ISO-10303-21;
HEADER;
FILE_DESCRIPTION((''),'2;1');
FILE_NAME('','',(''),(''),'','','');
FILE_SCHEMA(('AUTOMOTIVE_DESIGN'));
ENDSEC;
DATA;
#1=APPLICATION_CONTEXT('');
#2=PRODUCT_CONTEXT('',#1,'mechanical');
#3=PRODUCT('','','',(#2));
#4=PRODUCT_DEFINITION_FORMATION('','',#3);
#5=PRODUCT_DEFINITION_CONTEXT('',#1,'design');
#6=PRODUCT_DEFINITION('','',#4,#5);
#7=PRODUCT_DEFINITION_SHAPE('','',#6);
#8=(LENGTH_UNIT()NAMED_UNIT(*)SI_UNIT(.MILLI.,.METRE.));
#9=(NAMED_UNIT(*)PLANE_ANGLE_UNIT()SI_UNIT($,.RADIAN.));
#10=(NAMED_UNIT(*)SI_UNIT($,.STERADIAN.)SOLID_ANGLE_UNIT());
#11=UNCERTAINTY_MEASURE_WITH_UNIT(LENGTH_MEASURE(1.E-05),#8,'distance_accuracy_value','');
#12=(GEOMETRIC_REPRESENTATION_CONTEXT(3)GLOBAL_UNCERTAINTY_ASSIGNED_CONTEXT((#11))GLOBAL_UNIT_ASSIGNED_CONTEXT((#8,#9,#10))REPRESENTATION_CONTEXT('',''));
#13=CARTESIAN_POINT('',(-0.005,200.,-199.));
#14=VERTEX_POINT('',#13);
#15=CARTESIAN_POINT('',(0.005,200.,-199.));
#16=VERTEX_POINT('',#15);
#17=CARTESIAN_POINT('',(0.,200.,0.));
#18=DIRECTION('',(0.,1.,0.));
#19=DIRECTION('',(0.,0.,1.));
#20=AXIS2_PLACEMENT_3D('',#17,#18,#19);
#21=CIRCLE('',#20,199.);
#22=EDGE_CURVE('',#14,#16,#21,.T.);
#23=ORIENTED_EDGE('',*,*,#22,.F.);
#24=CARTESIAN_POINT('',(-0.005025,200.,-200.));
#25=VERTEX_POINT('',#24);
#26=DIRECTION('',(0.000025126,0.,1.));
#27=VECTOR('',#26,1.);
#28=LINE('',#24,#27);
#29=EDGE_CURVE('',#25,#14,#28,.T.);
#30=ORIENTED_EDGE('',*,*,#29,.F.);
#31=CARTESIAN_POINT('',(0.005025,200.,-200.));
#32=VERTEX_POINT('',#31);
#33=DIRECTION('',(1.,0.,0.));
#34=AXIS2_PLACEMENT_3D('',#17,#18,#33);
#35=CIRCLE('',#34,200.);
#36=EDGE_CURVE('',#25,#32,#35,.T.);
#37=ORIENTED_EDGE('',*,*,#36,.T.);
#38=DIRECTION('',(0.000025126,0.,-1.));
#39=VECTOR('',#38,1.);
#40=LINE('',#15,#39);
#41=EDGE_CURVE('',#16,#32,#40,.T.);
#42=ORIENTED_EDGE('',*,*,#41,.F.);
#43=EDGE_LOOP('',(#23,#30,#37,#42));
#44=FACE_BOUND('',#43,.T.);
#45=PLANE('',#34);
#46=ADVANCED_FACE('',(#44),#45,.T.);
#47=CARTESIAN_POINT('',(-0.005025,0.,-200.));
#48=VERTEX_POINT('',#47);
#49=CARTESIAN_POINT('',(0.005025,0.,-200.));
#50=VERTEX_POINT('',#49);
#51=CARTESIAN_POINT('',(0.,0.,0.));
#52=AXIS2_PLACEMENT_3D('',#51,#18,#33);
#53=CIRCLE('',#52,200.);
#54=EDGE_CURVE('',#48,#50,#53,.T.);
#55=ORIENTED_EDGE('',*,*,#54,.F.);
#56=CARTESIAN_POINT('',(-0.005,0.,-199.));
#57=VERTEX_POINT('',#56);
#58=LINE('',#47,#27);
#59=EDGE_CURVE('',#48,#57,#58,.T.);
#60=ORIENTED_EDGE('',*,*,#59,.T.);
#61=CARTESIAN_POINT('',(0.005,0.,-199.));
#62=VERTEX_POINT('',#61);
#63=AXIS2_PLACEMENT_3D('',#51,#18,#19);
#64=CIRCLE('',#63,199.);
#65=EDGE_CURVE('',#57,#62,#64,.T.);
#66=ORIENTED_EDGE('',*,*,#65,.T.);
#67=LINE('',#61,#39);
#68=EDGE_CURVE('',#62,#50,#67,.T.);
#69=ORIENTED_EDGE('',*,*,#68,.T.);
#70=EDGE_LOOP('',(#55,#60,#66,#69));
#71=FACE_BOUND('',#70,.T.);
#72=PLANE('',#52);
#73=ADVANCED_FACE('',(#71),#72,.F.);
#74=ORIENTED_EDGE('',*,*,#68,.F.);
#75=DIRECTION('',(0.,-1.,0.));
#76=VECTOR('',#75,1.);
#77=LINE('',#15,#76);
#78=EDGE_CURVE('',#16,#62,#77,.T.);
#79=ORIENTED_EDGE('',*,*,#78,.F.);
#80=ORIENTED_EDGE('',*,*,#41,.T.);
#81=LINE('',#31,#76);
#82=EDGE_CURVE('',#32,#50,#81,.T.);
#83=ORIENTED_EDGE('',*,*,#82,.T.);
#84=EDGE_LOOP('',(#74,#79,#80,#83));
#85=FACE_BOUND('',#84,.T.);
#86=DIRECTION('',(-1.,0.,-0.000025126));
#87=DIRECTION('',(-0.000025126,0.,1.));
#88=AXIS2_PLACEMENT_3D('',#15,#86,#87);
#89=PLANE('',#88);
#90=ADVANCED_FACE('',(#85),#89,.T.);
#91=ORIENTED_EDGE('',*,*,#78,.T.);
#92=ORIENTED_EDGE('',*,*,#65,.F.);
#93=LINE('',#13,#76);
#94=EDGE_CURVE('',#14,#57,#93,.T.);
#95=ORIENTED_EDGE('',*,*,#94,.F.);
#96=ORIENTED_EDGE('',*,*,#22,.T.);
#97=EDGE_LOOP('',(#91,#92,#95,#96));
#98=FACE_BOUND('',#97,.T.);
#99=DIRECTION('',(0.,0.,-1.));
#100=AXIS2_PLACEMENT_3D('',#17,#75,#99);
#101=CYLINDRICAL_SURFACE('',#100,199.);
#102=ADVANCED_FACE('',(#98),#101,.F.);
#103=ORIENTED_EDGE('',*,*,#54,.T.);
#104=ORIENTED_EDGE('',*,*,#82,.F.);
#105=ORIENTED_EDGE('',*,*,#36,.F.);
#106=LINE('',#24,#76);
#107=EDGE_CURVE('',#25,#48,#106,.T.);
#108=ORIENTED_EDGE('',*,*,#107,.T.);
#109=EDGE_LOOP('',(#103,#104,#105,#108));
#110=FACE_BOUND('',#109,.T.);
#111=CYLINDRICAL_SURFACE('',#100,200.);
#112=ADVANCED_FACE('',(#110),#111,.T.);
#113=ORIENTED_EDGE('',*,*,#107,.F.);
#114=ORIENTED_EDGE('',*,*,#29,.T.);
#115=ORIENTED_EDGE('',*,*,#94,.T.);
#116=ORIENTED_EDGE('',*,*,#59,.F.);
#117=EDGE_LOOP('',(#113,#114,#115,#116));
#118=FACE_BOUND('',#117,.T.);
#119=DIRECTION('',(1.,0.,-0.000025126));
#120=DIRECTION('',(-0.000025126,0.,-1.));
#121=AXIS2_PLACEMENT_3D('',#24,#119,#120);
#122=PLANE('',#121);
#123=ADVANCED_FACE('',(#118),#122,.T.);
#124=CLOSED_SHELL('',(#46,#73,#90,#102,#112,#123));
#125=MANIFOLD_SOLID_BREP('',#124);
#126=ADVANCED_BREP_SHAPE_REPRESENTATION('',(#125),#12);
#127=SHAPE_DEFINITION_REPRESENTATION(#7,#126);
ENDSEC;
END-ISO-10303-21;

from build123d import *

# Parameters (mm, degrees)
BASE_FLANGE1_DEPTH                    = 200
BASE_FLANGE2_START                    = -1.5
BASE_FLANGE2_DEPTH                    = 1.5
SKETCH9_W                             = 6.25
SKETCH9_H                             = 1.5
F_12_5_12_5_DIAMETER_HOLE2_AT_2_COUNT = 2
F_12_5_12_5_DIAMETER_HOLE2_AT_2_PITCH = 250
F_12_5_12_5_DIAMETER_HOLE2_AT_3_COUNT = 2
F_12_5_12_5_DIAMETER_HOLE2_AT_3_PITCH = 125
F_12_5_12_5_DIAMETER_HOLE2_AT_4_COUNT = 2
F_12_5_12_5_DIAMETER_HOLE2_AT_4_PITCH = 465.111814513
F_12_5_12_5_DIAMETER_HOLE2_AT_5_COUNT = 2
F_12_5_12_5_DIAMETER_HOLE2_AT_5_PITCH = 513.034111926
F_12_5_12_5_DIAMETER_HOLE2_AT_6_COUNT = 2
F_12_5_12_5_DIAMETER_HOLE2_AT_6_PITCH = 448
SKETCH11_W                            = 6.25
SKETCH11_H                            = 1.5
F_12_5_12_5_DIAMETER_HOLE3_AT_2_COUNT = 2
F_12_5_12_5_DIAMETER_HOLE3_AT_2_PITCH = 332
CRVPATTERN1_COUNT                     = 4
CRVPATTERN1_PITCH                     = 125
CRVPATTERN1_COPY_1_SKETCH_W           = 6.25
CRVPATTERN1_COPY_1_SKETCH_H           = 1.5
CRVPATTERN1_COPY_2_SKETCH_W           = 6.25
CRVPATTERN1_COPY_2_SKETCH_H           = 1.5
CRVPATTERN1_COPY_3_SKETCH_W           = 6.25
CRVPATTERN1_COPY_3_SKETCH_H           = 1.5
BASE_FLANGE3_DEPTH                    = 1.5
SKETCH14_W                            = 80
SKETCH14_H                            = 6
SKETCH14_W_2                          = 50
EXTRUDE1_DEPTH                        = 10
CRVPATTERN2_START                     = -81.5
CRVPATTERN2_OUTLINE_W                 = 1.5
CRVPATTERN2_OUTLINE_H                 = 6
CRVPATTERN2_DEPTH                     = 80
CRVPATTERN2_START_2                   = -134.5
CRVPATTERN2_2_OUTLINE_W               = 1.5
CRVPATTERN2_2_OUTLINE_H               = 6
CRVPATTERN2_2_DEPTH                   = 50
SKETCH15_W                            = 6
SKETCH15_H                            = 80
SKETCH15_H_2                          = 50
SKETCH15_H_3                          = 30
SKETCH15_W_2                          = 10
SKETCH15_H_4                          = 10
EXTRUDE2_DEPTH                        = 10


# Read off the part's stored shape, not the designer's step: CrvPattern2
# Sheet-metal steps are written as plain solids
with BuildPart() as part:
    # Sketch1 → Base-Flange1 (new body)
    with BuildSketch(Plane(origin=(0, 0, 0), x_dir=(1, 0, 0), z_dir=(0, 1, 0))):
        with BuildLine():
            ThreePointArc((-0.005, 198.999999937), (0, -199), (0.005, 198.999999937))
            Line((0.005, 198.999999937), (0.005025126, 199.999999937))
            ThreePointArc((0.005025126, 199.999999937), (0, -200), (-0.005025126, 199.999999937))
            Line((-0.005025126, 199.999999937), (-0.005, 198.999999937))
        make_face()
    extrude(amount=BASE_FLANGE1_DEPTH)


with BuildPart() as body_2:
    # Sketch4 → Base-Flange2 (new body)
    with BuildSketch(Plane(origin=(0, 0, 0), x_dir=(1, 0, 0), z_dir=(0, 1, 0)).offset(BASE_FLANGE2_START)):
        Polygon((240, 180), (240, -180), (0, -220), (-240, -180), (-240, 180), (0, 220), align=None)
        with BuildLine():
            Line((143.038535018, 140), (-142.828568571, 140))
            ThreePointArc((-142.828568571, 140), (-200, 0), (-142.828568571, -140))
            Line((-142.828568571, -140), (143.038535018, -140))
            ThreePointArc((143.038535018, -140), (200.15, 0), (143.038535018, 140))
        make_face(mode=Mode.SUBTRACT)
    extrude(amount=BASE_FLANGE2_DEPTH)

    # Sketch9 → Ø12.5 (12.5) Diameter Hole2 (revolve, cut)
    with BuildSketch(Plane(origin=(-224, 0, -125), x_dir=(0, 0, 1), z_dir=(1, 0, 0))):
        with Locations((3.125, 0.75)):
            Rectangle(SKETCH9_W, SKETCH9_H)
    f_12_5_12_5_diameter_hole2 = revolve(axis=Axis((-224, 6.35, -125), (0, -1, 0)), mode=Mode.SUBTRACT)

    # Ø12.5 (12.5) Diameter Hole2 at 2: Ø12.5 (12.5) Diameter Hole2 ×2
    with Locations(*[(0, 0, i * F_12_5_12_5_DIAMETER_HOLE2_AT_2_PITCH) for i in range(1, F_12_5_12_5_DIAMETER_HOLE2_AT_2_COUNT)]):
        add(f_12_5_12_5_diameter_hole2, mode=Mode.SUBTRACT)

    # Ø12.5 (12.5) Diameter Hole2 at 3: Ø12.5 (12.5) Diameter Hole2 ×2
    with Locations(*[(0, 0, i * F_12_5_12_5_DIAMETER_HOLE2_AT_3_PITCH) for i in range(1, F_12_5_12_5_DIAMETER_HOLE2_AT_3_COUNT)]):
        add(f_12_5_12_5_diameter_hole2, mode=Mode.SUBTRACT)

    # Ø12.5 (12.5) Diameter Hole2 at 4: Ø12.5 (12.5) Diameter Hole2 ×2
    with Locations(*[Vector(0.9632092456491202, 0, 0.2687525797012055) * (i * F_12_5_12_5_DIAMETER_HOLE2_AT_4_PITCH) for i in range(1, F_12_5_12_5_DIAMETER_HOLE2_AT_4_COUNT)]):
        add(f_12_5_12_5_diameter_hole2, mode=Mode.SUBTRACT)

    # Ø12.5 (12.5) Diameter Hole2 at 5: Ø12.5 (12.5) Diameter Hole2 ×2
    with Locations(*[Vector(0.8732362811468641, 0, 0.4872970318899912) * (i * F_12_5_12_5_DIAMETER_HOLE2_AT_5_PITCH) for i in range(1, F_12_5_12_5_DIAMETER_HOLE2_AT_5_COUNT)]):
        add(f_12_5_12_5_diameter_hole2, mode=Mode.SUBTRACT)

    # Ø12.5 (12.5) Diameter Hole2 at 6: Ø12.5 (12.5) Diameter Hole2 ×2
    with Locations(*[(i * F_12_5_12_5_DIAMETER_HOLE2_AT_6_PITCH, 0, 0) for i in range(1, F_12_5_12_5_DIAMETER_HOLE2_AT_6_COUNT)]):
        add(f_12_5_12_5_diameter_hole2, mode=Mode.SUBTRACT)

    # Sketch11 → Ø12.5 (12.5) Diameter Hole3 (revolve, cut)
    with BuildSketch(Plane(origin=(-187.5, 0, -166), x_dir=(0, 0, 1), z_dir=(1, 0, 0))):
        with Locations((3.125, 0.75)):
            Rectangle(SKETCH11_W, SKETCH11_H)
    f_12_5_12_5_diameter_hole3 = revolve(axis=Axis((-187.5, 6.35, -166), (0, -1, 0)), mode=Mode.SUBTRACT)

    # Ø12.5 (12.5) Diameter Hole3 at 2: Ø12.5 (12.5) Diameter Hole3 ×2
    with Locations(*[(0, 0, i * F_12_5_12_5_DIAMETER_HOLE3_AT_2_PITCH) for i in range(1, F_12_5_12_5_DIAMETER_HOLE3_AT_2_COUNT)]):
        add(f_12_5_12_5_diameter_hole3, mode=Mode.SUBTRACT)

    # CrvPattern1: Ø12.5 (12.5) Diameter Hole3 ×4
    with Locations(*[(i * CRVPATTERN1_PITCH, 0, 0) for i in range(1, CRVPATTERN1_COUNT)]):
        add(f_12_5_12_5_diameter_hole3, mode=Mode.SUBTRACT)

    # CrvPattern1 copy 1 sketch → CrvPattern1 copy 1 (revolve, cut)
    with BuildSketch(Plane(origin=(-62.5, 0, 166), x_dir=(0, 0, 1), z_dir=(1, 0, 0))):
        with Locations((3.125, 0.75)):
            Rectangle(CRVPATTERN1_COPY_1_SKETCH_W, CRVPATTERN1_COPY_1_SKETCH_H)
    revolve(axis=Axis((-62.5, 6.35, 166), (0, -1, 0)), mode=Mode.SUBTRACT)

    # CrvPattern1 copy 2 sketch → CrvPattern1 copy 2 (revolve, cut)
    with BuildSketch(Plane(origin=(62.5, 0, 166), x_dir=(0, 0, 1), z_dir=(1, 0, 0))):
        with Locations((3.125, 0.75)):
            Rectangle(CRVPATTERN1_COPY_2_SKETCH_W, CRVPATTERN1_COPY_2_SKETCH_H)
    revolve(axis=Axis((62.5, 6.35, 166), (0, -1, 0)), mode=Mode.SUBTRACT)

    # CrvPattern1 copy 3 sketch → CrvPattern1 copy 3 (revolve, cut)
    with BuildSketch(Plane(origin=(187.5, 0, 166), x_dir=(0, 0, 1), z_dir=(1, 0, 0))):
        with Locations((3.125, 0.75)):
            Rectangle(CRVPATTERN1_COPY_3_SKETCH_W, CRVPATTERN1_COPY_3_SKETCH_H)
    revolve(axis=Axis((187.5, 6.35, 166), (0, -1, 0)), mode=Mode.SUBTRACT)

    # Sketch13 → Base-Flange3 (add)
    with BuildSketch(Plane.XZ.offset(1.5)):
        with BuildLine():
            Line((-142.828568571, -140), (143.038535018, -140))
            ThreePointArc((143.038535018, -140), (200.15, 0), (143.038535018, 140))
            Line((143.038535018, 140), (-142.828568571, 140))
            ThreePointArc((-142.828568571, 140), (-200, 0), (-142.828568571, -140))
        make_face()
    extrude(amount=-BASE_FLANGE3_DEPTH)

    # Sketch14 → Extrude1 (cut)
    with BuildSketch(Plane(origin=(0, 0, 0), x_dir=(1, 0, 0), z_dir=(0, 1, 0))):
        with Locations((-41.5, 137)):
            Rectangle(SKETCH14_W, SKETCH14_H)
        with Locations((-109.5, 137)):
            Rectangle(SKETCH14_W_2, SKETCH14_H)
    extrude1 = extrude(amount=-EXTRUDE1_DEPTH, mode=Mode.SUBTRACT)

    # CrvPattern2 outline → CrvPattern2 (cut)
    with BuildSketch(Plane.YZ.offset(CRVPATTERN2_START)):
        with Locations((-0.75, -127.866666667)):
            Rectangle(CRVPATTERN2_OUTLINE_W, CRVPATTERN2_OUTLINE_H)
        with Locations((-0.75, -118.733333333)):
            Rectangle(CRVPATTERN2_OUTLINE_W, CRVPATTERN2_OUTLINE_H)
        with Locations((-0.75, -109.6)):
            Rectangle(CRVPATTERN2_OUTLINE_W, CRVPATTERN2_OUTLINE_H)
        with Locations((-0.75, -100.466666667)):
            Rectangle(CRVPATTERN2_OUTLINE_W, CRVPATTERN2_OUTLINE_H)
        with Locations((-0.75, -91.333333333)):
            Rectangle(CRVPATTERN2_OUTLINE_W, CRVPATTERN2_OUTLINE_H)
        with Locations((-0.75, -82.2)):
            Rectangle(CRVPATTERN2_OUTLINE_W, CRVPATTERN2_OUTLINE_H)
        with Locations((-0.75, -73.066666667)):
            Rectangle(CRVPATTERN2_OUTLINE_W, CRVPATTERN2_OUTLINE_H)
        with Locations((-0.75, -63.933333333)):
            Rectangle(CRVPATTERN2_OUTLINE_W, CRVPATTERN2_OUTLINE_H)
        with Locations((-0.75, -54.8)):
            Rectangle(CRVPATTERN2_OUTLINE_W, CRVPATTERN2_OUTLINE_H)
        with Locations((-0.75, -45.666666667)):
            Rectangle(CRVPATTERN2_OUTLINE_W, CRVPATTERN2_OUTLINE_H)
        with Locations((-0.75, -36.533333333)):
            Rectangle(CRVPATTERN2_OUTLINE_W, CRVPATTERN2_OUTLINE_H)
        with Locations((-0.75, -27.4)):
            Rectangle(CRVPATTERN2_OUTLINE_W, CRVPATTERN2_OUTLINE_H)
        with Locations((-0.75, -18.266666667)):
            Rectangle(CRVPATTERN2_OUTLINE_W, CRVPATTERN2_OUTLINE_H)
        with Locations((-0.75, -9.133333333)):
            Rectangle(CRVPATTERN2_OUTLINE_W, CRVPATTERN2_OUTLINE_H)
        with Locations((-0.75, 0)):
            Rectangle(CRVPATTERN2_OUTLINE_W, CRVPATTERN2_OUTLINE_H)
        with Locations((-0.75, 9.133333333)):
            Rectangle(CRVPATTERN2_OUTLINE_W, CRVPATTERN2_OUTLINE_H)
        with Locations((-0.75, 18.266666667)):
            Rectangle(CRVPATTERN2_OUTLINE_W, CRVPATTERN2_OUTLINE_H)
        with Locations((-0.75, 27.4)):
            Rectangle(CRVPATTERN2_OUTLINE_W, CRVPATTERN2_OUTLINE_H)
        with Locations((-0.75, 36.533333333)):
            Rectangle(CRVPATTERN2_OUTLINE_W, CRVPATTERN2_OUTLINE_H)
        with Locations((-0.75, 45.666666667)):
            Rectangle(CRVPATTERN2_OUTLINE_W, CRVPATTERN2_OUTLINE_H)
        with Locations((-0.75, 54.8)):
            Rectangle(CRVPATTERN2_OUTLINE_W, CRVPATTERN2_OUTLINE_H)
        with Locations((-0.75, 63.933333333)):
            Rectangle(CRVPATTERN2_OUTLINE_W, CRVPATTERN2_OUTLINE_H)
        with Locations((-0.75, 73.066666667)):
            Rectangle(CRVPATTERN2_OUTLINE_W, CRVPATTERN2_OUTLINE_H)
        with Locations((-0.75, 82.2)):
            Rectangle(CRVPATTERN2_OUTLINE_W, CRVPATTERN2_OUTLINE_H)
        with Locations((-0.75, 91.333333333)):
            Rectangle(CRVPATTERN2_OUTLINE_W, CRVPATTERN2_OUTLINE_H)
        with Locations((-0.75, 100.466666667)):
            Rectangle(CRVPATTERN2_OUTLINE_W, CRVPATTERN2_OUTLINE_H)
        with Locations((-0.75, 109.6)):
            Rectangle(CRVPATTERN2_OUTLINE_W, CRVPATTERN2_OUTLINE_H)
        with Locations((-0.75, 118.733333333)):
            Rectangle(CRVPATTERN2_OUTLINE_W, CRVPATTERN2_OUTLINE_H)
        with Locations((-0.75, 127.866666667)):
            Rectangle(CRVPATTERN2_OUTLINE_W, CRVPATTERN2_OUTLINE_H)
        with Locations((-0.75, 137)):
            Rectangle(CRVPATTERN2_OUTLINE_W, CRVPATTERN2_OUTLINE_H)
    crvpattern2 = extrude(amount=CRVPATTERN2_DEPTH, mode=Mode.SUBTRACT)

    # CrvPattern2 2 outline → CrvPattern2 2 (cut)
    with BuildSketch(Plane.YZ.offset(CRVPATTERN2_START_2)):
        with Locations((-0.75, -127.866666667)):
            Rectangle(CRVPATTERN2_2_OUTLINE_W, CRVPATTERN2_2_OUTLINE_H)
        with Locations((-0.75, -118.733333333)):
            Rectangle(CRVPATTERN2_2_OUTLINE_W, CRVPATTERN2_2_OUTLINE_H)
        with Locations((-0.75, -109.6)):
            Rectangle(CRVPATTERN2_2_OUTLINE_W, CRVPATTERN2_2_OUTLINE_H)
        with Locations((-0.75, -100.466666667)):
            Rectangle(CRVPATTERN2_2_OUTLINE_W, CRVPATTERN2_2_OUTLINE_H)
        with Locations((-0.75, -91.333333333)):
            Rectangle(CRVPATTERN2_2_OUTLINE_W, CRVPATTERN2_2_OUTLINE_H)
        with Locations((-0.75, -82.2)):
            Rectangle(CRVPATTERN2_2_OUTLINE_W, CRVPATTERN2_2_OUTLINE_H)
        with Locations((-0.75, -73.066666667)):
            Rectangle(CRVPATTERN2_2_OUTLINE_W, CRVPATTERN2_2_OUTLINE_H)
        with Locations((-0.75, -63.933333333)):
            Rectangle(CRVPATTERN2_2_OUTLINE_W, CRVPATTERN2_2_OUTLINE_H)
        with Locations((-0.75, -54.8)):
            Rectangle(CRVPATTERN2_2_OUTLINE_W, CRVPATTERN2_2_OUTLINE_H)
        with Locations((-0.75, -45.666666667)):
            Rectangle(CRVPATTERN2_2_OUTLINE_W, CRVPATTERN2_2_OUTLINE_H)
        with Locations((-0.75, -36.533333333)):
            Rectangle(CRVPATTERN2_2_OUTLINE_W, CRVPATTERN2_2_OUTLINE_H)
        with Locations((-0.75, -27.4)):
            Rectangle(CRVPATTERN2_2_OUTLINE_W, CRVPATTERN2_2_OUTLINE_H)
        with Locations((-0.75, -18.266666667)):
            Rectangle(CRVPATTERN2_2_OUTLINE_W, CRVPATTERN2_2_OUTLINE_H)
        with Locations((-0.75, -9.133333333)):
            Rectangle(CRVPATTERN2_2_OUTLINE_W, CRVPATTERN2_2_OUTLINE_H)
        with Locations((-0.75, 0)):
            Rectangle(CRVPATTERN2_2_OUTLINE_W, CRVPATTERN2_2_OUTLINE_H)
        with Locations((-0.75, 9.133333333)):
            Rectangle(CRVPATTERN2_2_OUTLINE_W, CRVPATTERN2_2_OUTLINE_H)
        with Locations((-0.75, 18.266666667)):
            Rectangle(CRVPATTERN2_2_OUTLINE_W, CRVPATTERN2_2_OUTLINE_H)
        with Locations((-0.75, 27.4)):
            Rectangle(CRVPATTERN2_2_OUTLINE_W, CRVPATTERN2_2_OUTLINE_H)
        with Locations((-0.75, 36.533333333)):
            Rectangle(CRVPATTERN2_2_OUTLINE_W, CRVPATTERN2_2_OUTLINE_H)
        with Locations((-0.75, 45.666666667)):
            Rectangle(CRVPATTERN2_2_OUTLINE_W, CRVPATTERN2_2_OUTLINE_H)
        with Locations((-0.75, 54.8)):
            Rectangle(CRVPATTERN2_2_OUTLINE_W, CRVPATTERN2_2_OUTLINE_H)
        with Locations((-0.75, 63.933333333)):
            Rectangle(CRVPATTERN2_2_OUTLINE_W, CRVPATTERN2_2_OUTLINE_H)
        with Locations((-0.75, 73.066666667)):
            Rectangle(CRVPATTERN2_2_OUTLINE_W, CRVPATTERN2_2_OUTLINE_H)
        with Locations((-0.75, 82.2)):
            Rectangle(CRVPATTERN2_2_OUTLINE_W, CRVPATTERN2_2_OUTLINE_H)
        with Locations((-0.75, 91.333333333)):
            Rectangle(CRVPATTERN2_2_OUTLINE_W, CRVPATTERN2_2_OUTLINE_H)
        with Locations((-0.75, 100.466666667)):
            Rectangle(CRVPATTERN2_2_OUTLINE_W, CRVPATTERN2_2_OUTLINE_H)
        with Locations((-0.75, 109.6)):
            Rectangle(CRVPATTERN2_2_OUTLINE_W, CRVPATTERN2_2_OUTLINE_H)
        with Locations((-0.75, 118.733333333)):
            Rectangle(CRVPATTERN2_2_OUTLINE_W, CRVPATTERN2_2_OUTLINE_H)
        with Locations((-0.75, 127.866666667)):
            Rectangle(CRVPATTERN2_2_OUTLINE_W, CRVPATTERN2_2_OUTLINE_H)
        with Locations((-0.75, 137)):
            Rectangle(CRVPATTERN2_2_OUTLINE_W, CRVPATTERN2_2_OUTLINE_H)
    crvpattern2_2 = extrude(amount=CRVPATTERN2_2_DEPTH, mode=Mode.SUBTRACT)

    # Sketch15 → Extrude2 (cut)
    with BuildSketch(Plane(origin=(0, 0, 0), x_dir=(1, 0, 0), z_dir=(0, 1, 0))):
        with Locations((-140.5, 41.5)):
            Rectangle(SKETCH15_W, SKETCH15_H)
        with Locations((-140.5, 109.5)):
            Rectangle(SKETCH15_W, SKETCH15_H_2)
        with Locations((-149.5, 41.5)):
            Rectangle(SKETCH15_W, SKETCH15_H)
        with Locations((-149.5, 109.5)):
            Rectangle(SKETCH15_W, SKETCH15_H_2)
        with Locations((-158.5, 41.5)):
            Rectangle(SKETCH15_W, SKETCH15_H)
        with Locations((-167.5, 41.5)):
            Rectangle(SKETCH15_W, SKETCH15_H)
        with Locations((-176.5, 41.5)):
            Rectangle(SKETCH15_W, SKETCH15_H)
        with Locations((-185.5, 41.5)):
            Rectangle(SKETCH15_W, SKETCH15_H)
        with Locations((-158.5, 99.5)):
            Rectangle(SKETCH15_W, SKETCH15_H_3)
        with Locations((-169.5, 89.5)):
            Rectangle(SKETCH15_W_2, SKETCH15_H_4)
        with Locations((-169.5, -89.5)):
            Rectangle(SKETCH15_W_2, SKETCH15_H_4)
        with Locations((-158.5, -99.5)):
            Rectangle(SKETCH15_W, SKETCH15_H_3)
        with Locations((-185.5, -41.5)):
            Rectangle(SKETCH15_W, SKETCH15_H)
        with Locations((-176.5, -41.5)):
            Rectangle(SKETCH15_W, SKETCH15_H)
        with Locations((-167.5, -41.5)):
            Rectangle(SKETCH15_W, SKETCH15_H)
        with Locations((-158.5, -41.5)):
            Rectangle(SKETCH15_W, SKETCH15_H)
        with Locations((-149.5, -109.5)):
            Rectangle(SKETCH15_W, SKETCH15_H_2)
        with Locations((-149.5, -41.5)):
            Rectangle(SKETCH15_W, SKETCH15_H)
        with Locations((-140.5, -109.5)):
            Rectangle(SKETCH15_W, SKETCH15_H_2)
        with Locations((-140.5, -41.5)):
            Rectangle(SKETCH15_W, SKETCH15_H)
        with Locations((-194.5, 0)):
            Rectangle(SKETCH15_W, SKETCH15_H)
    extrude2 = extrude(amount=-EXTRUDE2_DEPTH, mode=Mode.SUBTRACT)

    # Mirror1: Extrude1, CrvPattern2, CrvPattern2 2, Extrude2 across plane
    add(extrude1.mirror(Plane(origin=(0, 0, 0), x_dir=(0, 0, 1), z_dir=(1, 0, 0))), mode=Mode.SUBTRACT)
    add(crvpattern2.mirror(Plane(origin=(0, 0, 0), x_dir=(0, 0, 1), z_dir=(1, 0, 0))), mode=Mode.SUBTRACT)
    add(crvpattern2_2.mirror(Plane(origin=(0, 0, 0), x_dir=(0, 0, 1), z_dir=(1, 0, 0))), mode=Mode.SUBTRACT)
    add(extrude2.mirror(Plane(origin=(0, 0, 0), x_dir=(0, 0, 1), z_dir=(1, 0, 0))), mode=Mode.SUBTRACT)


solid = part.part
